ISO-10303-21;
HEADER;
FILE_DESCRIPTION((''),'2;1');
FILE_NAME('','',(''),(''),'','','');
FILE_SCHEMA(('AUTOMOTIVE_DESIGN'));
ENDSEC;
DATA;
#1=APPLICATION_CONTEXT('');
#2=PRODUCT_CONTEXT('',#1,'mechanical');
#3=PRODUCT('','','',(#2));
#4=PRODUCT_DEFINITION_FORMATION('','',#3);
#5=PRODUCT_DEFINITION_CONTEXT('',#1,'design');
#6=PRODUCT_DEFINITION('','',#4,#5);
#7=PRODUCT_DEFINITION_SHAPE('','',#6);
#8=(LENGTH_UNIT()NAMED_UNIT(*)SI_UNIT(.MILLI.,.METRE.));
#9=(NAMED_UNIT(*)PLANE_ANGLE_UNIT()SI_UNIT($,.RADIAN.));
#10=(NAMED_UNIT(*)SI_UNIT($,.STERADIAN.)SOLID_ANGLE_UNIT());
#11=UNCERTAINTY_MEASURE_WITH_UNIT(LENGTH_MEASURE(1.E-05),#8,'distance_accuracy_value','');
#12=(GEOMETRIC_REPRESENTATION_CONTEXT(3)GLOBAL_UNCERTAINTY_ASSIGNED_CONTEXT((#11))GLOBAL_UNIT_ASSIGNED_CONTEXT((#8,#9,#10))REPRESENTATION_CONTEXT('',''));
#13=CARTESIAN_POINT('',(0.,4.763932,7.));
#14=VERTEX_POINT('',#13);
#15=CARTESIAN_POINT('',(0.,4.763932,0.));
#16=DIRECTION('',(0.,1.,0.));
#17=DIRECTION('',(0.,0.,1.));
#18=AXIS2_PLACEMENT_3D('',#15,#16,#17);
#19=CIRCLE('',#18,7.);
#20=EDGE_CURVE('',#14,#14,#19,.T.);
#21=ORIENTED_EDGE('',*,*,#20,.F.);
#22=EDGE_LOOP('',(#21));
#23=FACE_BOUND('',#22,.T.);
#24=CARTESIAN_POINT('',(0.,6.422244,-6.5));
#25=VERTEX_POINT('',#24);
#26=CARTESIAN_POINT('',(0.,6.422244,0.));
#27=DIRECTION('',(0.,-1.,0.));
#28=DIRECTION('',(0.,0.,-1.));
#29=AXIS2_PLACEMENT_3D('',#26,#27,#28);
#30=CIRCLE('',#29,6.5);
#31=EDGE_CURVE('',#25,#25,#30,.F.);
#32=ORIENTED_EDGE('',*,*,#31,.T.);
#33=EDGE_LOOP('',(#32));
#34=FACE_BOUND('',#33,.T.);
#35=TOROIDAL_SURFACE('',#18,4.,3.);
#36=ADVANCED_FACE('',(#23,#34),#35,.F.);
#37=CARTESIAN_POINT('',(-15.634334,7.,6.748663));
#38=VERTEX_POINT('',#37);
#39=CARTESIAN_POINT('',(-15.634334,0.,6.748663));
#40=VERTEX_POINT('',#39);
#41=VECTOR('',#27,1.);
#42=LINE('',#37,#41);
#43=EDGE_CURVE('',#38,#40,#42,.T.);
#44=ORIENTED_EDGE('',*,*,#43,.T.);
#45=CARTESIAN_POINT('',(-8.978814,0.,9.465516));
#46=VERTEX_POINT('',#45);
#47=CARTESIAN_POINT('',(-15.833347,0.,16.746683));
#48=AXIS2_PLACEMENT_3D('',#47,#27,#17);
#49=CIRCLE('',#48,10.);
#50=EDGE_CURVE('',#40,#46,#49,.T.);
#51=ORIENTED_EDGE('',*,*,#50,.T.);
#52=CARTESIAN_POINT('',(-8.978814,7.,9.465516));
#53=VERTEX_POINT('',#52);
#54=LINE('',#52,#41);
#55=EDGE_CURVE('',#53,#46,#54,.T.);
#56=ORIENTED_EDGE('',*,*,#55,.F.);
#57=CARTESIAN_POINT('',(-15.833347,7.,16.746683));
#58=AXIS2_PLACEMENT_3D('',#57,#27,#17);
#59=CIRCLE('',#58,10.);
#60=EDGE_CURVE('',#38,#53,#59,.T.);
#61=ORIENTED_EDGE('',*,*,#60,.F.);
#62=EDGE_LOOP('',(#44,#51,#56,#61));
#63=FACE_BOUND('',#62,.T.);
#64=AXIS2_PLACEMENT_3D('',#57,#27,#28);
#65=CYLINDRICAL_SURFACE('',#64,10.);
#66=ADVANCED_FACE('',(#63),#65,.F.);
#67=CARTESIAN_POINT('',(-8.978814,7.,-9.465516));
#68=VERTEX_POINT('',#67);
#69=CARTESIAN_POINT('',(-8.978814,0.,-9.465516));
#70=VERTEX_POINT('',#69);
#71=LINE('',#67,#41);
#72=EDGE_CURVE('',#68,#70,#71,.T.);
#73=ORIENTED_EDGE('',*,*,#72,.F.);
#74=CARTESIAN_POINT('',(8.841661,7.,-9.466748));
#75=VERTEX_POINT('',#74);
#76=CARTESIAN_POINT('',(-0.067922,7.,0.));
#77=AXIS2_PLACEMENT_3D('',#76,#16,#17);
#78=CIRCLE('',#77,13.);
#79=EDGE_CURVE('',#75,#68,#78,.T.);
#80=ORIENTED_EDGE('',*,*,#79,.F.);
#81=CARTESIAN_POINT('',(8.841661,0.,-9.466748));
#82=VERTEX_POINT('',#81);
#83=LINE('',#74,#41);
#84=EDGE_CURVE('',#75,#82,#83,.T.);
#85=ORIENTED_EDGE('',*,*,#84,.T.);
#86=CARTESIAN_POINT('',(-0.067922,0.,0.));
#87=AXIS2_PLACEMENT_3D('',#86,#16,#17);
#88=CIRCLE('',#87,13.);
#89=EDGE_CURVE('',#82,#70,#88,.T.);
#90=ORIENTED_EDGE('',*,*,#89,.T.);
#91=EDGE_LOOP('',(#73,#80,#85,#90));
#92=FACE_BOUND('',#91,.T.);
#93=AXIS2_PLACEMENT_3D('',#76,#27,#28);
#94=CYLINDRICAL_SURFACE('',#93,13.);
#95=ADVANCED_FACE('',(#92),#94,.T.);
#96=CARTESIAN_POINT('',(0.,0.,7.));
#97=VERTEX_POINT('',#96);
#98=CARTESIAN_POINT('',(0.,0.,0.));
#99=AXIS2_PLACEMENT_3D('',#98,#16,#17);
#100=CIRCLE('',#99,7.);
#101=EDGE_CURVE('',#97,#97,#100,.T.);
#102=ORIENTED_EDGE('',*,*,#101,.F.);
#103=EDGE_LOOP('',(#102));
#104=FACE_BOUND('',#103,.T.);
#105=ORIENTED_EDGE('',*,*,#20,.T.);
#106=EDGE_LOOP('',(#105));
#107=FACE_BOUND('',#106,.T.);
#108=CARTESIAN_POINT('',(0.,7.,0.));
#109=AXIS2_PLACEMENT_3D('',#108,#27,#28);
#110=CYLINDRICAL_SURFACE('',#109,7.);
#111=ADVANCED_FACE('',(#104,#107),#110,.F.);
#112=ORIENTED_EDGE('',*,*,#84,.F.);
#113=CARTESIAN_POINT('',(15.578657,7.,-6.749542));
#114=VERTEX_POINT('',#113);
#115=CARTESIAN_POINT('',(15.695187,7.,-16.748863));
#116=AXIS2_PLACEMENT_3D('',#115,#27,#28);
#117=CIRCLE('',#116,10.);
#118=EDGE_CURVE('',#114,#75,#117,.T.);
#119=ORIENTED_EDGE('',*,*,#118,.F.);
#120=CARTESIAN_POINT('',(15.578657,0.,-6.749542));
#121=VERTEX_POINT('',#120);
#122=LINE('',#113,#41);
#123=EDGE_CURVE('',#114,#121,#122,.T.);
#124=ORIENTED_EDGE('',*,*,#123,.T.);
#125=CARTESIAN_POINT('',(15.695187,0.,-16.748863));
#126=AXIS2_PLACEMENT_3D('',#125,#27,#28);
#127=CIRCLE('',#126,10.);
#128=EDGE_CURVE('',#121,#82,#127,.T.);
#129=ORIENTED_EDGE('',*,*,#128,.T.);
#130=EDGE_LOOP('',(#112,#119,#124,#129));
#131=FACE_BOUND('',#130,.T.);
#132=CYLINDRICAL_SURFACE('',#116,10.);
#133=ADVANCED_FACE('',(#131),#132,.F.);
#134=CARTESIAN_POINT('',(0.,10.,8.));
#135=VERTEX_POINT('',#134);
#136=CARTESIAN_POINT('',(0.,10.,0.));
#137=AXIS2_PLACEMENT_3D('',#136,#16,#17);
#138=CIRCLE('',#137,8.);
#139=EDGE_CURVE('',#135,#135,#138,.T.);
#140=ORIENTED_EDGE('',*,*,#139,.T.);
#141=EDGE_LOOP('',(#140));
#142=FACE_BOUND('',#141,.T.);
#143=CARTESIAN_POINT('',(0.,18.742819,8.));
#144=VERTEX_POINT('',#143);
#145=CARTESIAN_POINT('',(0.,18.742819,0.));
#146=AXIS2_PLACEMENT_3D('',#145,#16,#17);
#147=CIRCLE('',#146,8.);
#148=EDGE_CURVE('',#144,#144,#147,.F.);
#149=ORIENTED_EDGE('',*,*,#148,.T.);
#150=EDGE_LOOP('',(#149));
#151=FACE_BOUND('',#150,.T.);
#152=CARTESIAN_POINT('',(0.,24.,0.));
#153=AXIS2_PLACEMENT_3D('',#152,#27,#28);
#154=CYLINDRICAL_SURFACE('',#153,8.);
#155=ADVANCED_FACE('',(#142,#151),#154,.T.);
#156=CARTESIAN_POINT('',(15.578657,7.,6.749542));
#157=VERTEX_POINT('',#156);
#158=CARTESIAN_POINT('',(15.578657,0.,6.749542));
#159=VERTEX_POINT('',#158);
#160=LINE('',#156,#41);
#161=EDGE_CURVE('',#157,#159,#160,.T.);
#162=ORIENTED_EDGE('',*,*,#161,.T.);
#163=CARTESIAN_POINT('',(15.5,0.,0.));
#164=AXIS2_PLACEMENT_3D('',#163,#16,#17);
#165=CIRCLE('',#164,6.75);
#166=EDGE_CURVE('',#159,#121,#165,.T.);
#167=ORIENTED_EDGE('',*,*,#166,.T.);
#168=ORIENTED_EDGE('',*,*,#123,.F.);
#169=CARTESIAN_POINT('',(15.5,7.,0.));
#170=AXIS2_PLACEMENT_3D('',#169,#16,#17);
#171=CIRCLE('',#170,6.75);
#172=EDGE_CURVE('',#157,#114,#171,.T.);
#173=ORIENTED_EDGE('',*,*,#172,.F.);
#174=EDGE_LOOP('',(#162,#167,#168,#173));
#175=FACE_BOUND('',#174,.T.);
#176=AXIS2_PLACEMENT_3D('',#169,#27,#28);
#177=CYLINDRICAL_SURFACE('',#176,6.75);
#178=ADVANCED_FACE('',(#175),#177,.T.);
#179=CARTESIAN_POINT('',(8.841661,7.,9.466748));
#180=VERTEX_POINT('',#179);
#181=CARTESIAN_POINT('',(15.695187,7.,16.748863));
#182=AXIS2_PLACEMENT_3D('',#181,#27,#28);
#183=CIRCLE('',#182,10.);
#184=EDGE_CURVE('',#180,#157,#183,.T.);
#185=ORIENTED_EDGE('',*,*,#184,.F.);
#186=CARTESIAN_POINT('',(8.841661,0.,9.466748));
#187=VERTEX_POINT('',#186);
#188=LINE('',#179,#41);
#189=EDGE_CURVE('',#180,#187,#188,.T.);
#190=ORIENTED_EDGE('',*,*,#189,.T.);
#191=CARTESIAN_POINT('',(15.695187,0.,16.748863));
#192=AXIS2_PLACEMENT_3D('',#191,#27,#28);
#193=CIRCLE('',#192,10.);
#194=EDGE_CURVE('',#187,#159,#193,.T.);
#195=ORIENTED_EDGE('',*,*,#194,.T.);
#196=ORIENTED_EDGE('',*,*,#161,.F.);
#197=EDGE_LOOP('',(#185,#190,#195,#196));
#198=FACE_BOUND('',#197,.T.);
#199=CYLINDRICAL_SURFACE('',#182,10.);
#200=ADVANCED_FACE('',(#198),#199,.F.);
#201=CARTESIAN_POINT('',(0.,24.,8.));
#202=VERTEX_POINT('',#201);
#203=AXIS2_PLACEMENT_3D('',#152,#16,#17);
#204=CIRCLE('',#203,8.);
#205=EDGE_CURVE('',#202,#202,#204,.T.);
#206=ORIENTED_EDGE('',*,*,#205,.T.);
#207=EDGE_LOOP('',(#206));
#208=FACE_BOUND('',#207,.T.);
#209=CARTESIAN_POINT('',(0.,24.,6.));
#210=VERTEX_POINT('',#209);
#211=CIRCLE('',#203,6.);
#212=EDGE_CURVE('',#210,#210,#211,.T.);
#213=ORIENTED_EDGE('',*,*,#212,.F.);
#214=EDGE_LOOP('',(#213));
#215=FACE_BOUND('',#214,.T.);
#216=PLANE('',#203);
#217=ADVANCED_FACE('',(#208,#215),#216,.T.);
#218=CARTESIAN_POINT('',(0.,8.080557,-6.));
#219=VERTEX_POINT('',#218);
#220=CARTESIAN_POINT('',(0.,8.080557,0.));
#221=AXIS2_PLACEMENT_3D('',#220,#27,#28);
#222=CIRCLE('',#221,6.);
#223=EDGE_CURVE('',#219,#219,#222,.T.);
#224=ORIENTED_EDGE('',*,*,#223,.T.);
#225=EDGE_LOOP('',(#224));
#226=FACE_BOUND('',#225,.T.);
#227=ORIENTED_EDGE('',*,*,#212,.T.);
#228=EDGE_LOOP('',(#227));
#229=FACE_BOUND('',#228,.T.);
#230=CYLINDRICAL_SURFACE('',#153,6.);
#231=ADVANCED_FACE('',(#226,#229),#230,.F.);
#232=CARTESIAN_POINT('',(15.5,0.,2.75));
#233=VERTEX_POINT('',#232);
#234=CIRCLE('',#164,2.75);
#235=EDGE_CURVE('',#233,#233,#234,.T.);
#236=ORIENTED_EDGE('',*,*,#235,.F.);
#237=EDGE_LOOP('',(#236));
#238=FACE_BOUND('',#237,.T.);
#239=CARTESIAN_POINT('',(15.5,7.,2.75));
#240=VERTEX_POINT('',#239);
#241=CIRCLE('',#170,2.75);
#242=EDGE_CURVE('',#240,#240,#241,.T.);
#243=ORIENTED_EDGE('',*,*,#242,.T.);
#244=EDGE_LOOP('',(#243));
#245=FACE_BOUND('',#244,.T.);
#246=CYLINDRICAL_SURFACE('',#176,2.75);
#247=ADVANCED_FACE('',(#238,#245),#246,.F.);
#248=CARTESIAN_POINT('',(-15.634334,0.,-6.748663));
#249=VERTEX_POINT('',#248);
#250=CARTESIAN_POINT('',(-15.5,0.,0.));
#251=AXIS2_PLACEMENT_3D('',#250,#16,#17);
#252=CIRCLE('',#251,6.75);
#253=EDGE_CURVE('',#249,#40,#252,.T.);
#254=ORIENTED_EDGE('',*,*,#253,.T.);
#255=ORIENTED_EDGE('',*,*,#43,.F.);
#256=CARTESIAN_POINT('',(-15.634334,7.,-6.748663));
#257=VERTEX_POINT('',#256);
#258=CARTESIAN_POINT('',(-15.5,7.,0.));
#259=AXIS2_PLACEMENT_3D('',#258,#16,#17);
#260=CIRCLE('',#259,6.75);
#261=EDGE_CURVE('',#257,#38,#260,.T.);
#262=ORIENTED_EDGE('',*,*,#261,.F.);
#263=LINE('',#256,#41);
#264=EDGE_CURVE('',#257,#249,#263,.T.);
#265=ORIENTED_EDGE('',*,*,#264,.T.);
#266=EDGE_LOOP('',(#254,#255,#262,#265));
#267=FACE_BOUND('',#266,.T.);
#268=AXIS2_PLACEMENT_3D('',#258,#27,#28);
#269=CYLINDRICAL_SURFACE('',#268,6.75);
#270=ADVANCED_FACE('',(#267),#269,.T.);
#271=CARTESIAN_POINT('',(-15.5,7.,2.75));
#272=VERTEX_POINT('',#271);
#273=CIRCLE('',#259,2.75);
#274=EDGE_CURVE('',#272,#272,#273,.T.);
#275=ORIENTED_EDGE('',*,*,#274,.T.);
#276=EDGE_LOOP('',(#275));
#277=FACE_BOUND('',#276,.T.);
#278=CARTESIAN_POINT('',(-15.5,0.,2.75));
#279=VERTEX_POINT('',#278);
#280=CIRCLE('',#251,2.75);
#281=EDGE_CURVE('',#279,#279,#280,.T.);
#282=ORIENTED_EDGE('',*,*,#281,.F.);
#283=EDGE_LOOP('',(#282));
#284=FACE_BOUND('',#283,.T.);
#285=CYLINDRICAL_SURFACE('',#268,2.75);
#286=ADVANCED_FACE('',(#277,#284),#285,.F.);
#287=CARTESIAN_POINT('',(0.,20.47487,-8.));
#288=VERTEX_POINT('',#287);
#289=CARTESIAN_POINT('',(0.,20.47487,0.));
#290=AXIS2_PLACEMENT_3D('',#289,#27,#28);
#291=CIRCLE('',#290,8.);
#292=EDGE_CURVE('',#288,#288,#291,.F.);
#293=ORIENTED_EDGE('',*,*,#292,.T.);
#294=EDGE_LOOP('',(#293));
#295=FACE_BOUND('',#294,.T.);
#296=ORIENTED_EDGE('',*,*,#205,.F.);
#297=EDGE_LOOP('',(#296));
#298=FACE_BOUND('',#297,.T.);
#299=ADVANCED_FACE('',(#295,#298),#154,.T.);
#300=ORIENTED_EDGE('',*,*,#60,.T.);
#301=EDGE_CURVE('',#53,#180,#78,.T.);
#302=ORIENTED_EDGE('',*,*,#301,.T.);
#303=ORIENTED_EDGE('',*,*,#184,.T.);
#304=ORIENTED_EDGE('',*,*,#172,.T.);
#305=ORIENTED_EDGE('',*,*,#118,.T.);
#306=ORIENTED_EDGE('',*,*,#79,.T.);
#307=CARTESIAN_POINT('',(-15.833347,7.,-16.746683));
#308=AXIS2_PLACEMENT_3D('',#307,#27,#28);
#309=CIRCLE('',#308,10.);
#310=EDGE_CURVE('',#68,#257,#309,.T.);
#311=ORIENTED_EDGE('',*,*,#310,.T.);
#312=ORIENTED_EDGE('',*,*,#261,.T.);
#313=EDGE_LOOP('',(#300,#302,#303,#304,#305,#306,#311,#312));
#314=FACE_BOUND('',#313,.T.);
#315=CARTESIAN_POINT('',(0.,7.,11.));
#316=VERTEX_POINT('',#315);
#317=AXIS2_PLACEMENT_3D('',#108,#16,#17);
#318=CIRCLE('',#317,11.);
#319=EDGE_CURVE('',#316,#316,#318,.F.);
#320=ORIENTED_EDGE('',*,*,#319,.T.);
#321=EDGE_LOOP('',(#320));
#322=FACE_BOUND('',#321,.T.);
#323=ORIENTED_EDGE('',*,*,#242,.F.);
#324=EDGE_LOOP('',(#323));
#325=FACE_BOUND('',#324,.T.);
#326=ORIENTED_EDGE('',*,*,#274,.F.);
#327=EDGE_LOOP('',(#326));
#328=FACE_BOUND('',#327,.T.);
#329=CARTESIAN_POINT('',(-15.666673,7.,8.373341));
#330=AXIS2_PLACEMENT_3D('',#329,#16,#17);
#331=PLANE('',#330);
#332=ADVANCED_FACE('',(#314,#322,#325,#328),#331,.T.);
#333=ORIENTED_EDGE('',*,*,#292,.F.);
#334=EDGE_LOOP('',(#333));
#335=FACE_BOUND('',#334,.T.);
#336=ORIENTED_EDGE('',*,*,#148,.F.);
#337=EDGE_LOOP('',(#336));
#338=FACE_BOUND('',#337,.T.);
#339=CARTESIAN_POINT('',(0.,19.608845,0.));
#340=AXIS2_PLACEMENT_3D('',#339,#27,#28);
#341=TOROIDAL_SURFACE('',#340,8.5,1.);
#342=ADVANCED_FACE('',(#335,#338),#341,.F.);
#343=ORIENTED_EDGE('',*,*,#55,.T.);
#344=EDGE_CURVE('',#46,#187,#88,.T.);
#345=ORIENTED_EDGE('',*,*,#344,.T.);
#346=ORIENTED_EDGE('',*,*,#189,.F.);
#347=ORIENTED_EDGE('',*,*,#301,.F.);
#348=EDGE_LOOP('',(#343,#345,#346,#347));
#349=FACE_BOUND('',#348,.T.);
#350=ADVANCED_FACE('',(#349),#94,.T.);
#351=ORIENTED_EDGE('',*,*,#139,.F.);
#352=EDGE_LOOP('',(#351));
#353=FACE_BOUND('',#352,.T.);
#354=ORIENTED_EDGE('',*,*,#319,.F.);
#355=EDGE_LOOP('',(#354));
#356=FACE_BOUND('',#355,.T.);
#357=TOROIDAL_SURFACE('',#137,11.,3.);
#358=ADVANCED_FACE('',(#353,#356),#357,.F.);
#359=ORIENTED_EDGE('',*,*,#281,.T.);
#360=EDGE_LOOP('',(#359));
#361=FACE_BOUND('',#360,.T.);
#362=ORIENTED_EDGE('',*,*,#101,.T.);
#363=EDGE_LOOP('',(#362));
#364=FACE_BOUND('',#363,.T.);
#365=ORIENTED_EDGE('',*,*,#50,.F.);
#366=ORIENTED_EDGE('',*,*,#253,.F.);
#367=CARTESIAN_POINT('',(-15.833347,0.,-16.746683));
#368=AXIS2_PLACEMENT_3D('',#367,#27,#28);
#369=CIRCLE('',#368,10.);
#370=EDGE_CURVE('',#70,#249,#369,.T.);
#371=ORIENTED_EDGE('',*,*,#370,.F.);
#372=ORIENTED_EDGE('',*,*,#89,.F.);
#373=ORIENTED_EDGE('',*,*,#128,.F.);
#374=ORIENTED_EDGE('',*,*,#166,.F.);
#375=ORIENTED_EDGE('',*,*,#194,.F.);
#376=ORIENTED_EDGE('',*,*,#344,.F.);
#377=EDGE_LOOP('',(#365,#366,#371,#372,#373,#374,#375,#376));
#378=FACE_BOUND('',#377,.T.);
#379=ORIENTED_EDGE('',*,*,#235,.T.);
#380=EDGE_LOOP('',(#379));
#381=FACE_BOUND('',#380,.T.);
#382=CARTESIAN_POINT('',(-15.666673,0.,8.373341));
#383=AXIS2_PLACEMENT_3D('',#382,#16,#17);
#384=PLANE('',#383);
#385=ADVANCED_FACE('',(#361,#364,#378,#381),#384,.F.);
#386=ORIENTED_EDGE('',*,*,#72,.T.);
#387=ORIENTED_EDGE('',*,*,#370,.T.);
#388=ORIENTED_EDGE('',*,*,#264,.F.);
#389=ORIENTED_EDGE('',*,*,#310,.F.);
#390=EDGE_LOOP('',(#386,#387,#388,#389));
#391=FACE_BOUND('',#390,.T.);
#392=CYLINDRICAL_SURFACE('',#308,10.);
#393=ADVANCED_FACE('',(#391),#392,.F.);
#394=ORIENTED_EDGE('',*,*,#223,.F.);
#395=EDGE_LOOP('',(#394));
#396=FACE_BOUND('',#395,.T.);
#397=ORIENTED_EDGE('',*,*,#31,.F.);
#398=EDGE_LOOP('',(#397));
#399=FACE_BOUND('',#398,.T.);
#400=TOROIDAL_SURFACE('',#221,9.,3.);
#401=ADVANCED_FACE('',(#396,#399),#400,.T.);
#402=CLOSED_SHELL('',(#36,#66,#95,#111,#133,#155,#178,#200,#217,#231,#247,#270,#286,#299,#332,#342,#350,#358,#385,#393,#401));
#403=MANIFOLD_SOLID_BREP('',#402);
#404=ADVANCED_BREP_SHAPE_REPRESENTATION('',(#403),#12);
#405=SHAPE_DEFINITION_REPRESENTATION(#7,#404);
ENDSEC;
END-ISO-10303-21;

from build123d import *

# Parameters (mm, degrees)
SKETCH1_R           = 7
SKETCH1_R_2         = 2.75
BOSS_EXTRUDE1_DEPTH = 7
SKETCH2_R           = 8
SKETCH2_R_2         = 6
BOSS_EXTRUDE2_DEPTH = 17
FILLET1_R           = 3
FILLET2_R           = 3
SKETCH3_R           = 1


with BuildPart() as part:
    # Sketch1 → Boss-Extrude1 (new body)
    with BuildSketch(Plane(origin=(0, 0, 0), x_dir=(1, 0, 0), z_dir=(0, 1, 0))):
        with BuildLine():
            ThreePointArc((-15.634333704, 6.748663161), (-22.25, 0), (-15.634333704, -6.748663161))
            ThreePointArc((-15.634333704, -6.748663161), (-12.054001616, -7.488359295), (-8.978814065, -9.465516285))
            ThreePointArc((-8.978814065, -9.465516285), (-0.068820662, -12.999999969), (8.841661443, -9.466748488))
            ThreePointArc((8.841661443, -9.466748488), (11.954703039, -7.474770851), (15.578657445, -6.749541689))
            ThreePointArc((15.578657445, -6.749541689), (22.25, 0), (15.578657445, 6.749541689))
            ThreePointArc((15.578657445, 6.749541689), (11.954703039, 7.474770851), (8.841661443, 9.466748488))
            ThreePointArc((8.841661443, 9.466748488), (-0.068820662, 12.999999969), (-8.978814065, 9.465516285))
            ThreePointArc((-8.978814065, 9.465516285), (-12.054001616, 7.488359295), (-15.634333704, 6.748663161))
        make_face()
        with Locations(Location((0, 0, 0), (0, 0, 270))):
            Circle(SKETCH1_R, mode=Mode.SUBTRACT)
        with Locations(Location((-15.5, 0, 0), (0, 0, 270))):
            Circle(SKETCH1_R_2, mode=Mode.SUBTRACT)
        with Locations(Location((15.5, 0, 0), (0, 0, 270))):
            Circle(SKETCH1_R_2, mode=Mode.SUBTRACT)
    extrude(amount=BOSS_EXTRUDE1_DEPTH)

    # Sketch2 → Boss-Extrude2 (add)
    with BuildSketch(Plane(origin=(0, 7, 0), x_dir=(1, 0, 0), z_dir=(0, 1, 0))):
        with Locations(Location((0, 0, 0), (0, 0, 270))):
            Circle(SKETCH2_R)
        with Locations(Location((0, 0, 0), (0, 0, 270))):
            Circle(SKETCH2_R_2, mode=Mode.SUBTRACT)
    extrude(amount=BOSS_EXTRUDE2_DEPTH)

    # Fillet1
    # the kernel refuses this fillet: 3 mm, written as the material it adds along each edge
    with BuildSketch(Plane(origin=(0, 7, 0), x_dir=(0, 0, 1), z_dir=(-1, 0, 0))) as fillet1_piece_1:
        with BuildLine():
            CenterArc((4, -2.236067977), FILLET1_R, 0, 48.189685104)
            Line((6, 0), (6.04, 0.04472136))
            ThreePointArc((6.04, 0.04472136), (6.5, 0.06), (7, 0.06))
            Line((7, 0.06), (7.06, 0))
            Line((7.06, 0), (7.06, -2.236067977))
            Line((7.06, -2.236067977), (7, -2.236067977))
        make_face()
    revolve(axis=Axis((0, 7, 0), (0, 1, 0)))
    with BuildSketch(Plane(origin=(0, 7, 0), x_dir=(0, 0, 1), z_dir=(-1, 0, 0))) as fillet1_piece_2:
        with BuildLine():
            CenterArc((8 + FILLET1_R, FILLET1_R), FILLET1_R, 180, 90)
            Line((8, FILLET1_R), (8 - FILLET1_R * 0.02, FILLET1_R))
            Line((8 - FILLET1_R * 0.02, FILLET1_R), (8 - FILLET1_R * 0.02, -FILLET1_R * 0.02))
            Line((8 - FILLET1_R * 0.02, -FILLET1_R * 0.02), (8 + FILLET1_R, -FILLET1_R * 0.02))
            Line((8 + FILLET1_R, -FILLET1_R * 0.02), (8 + FILLET1_R, 0))
        make_face()
    revolve(axis=Axis((0, 7, 0), (0, 1, 0)))

    # Fillet2
    fillet2_edges = [part.edges().sort_by_distance(p)[0] for p in [
        (0, 7, -6),
    ]]
    fillet(fillet2_edges, radius=FILLET2_R)


with BuildPart() as body_2:
    # Sketch3 → Revolve1 (revolve)
    with BuildSketch(Plane(origin=(0, 0, 0), x_dir=(0, 0, -1), z_dir=(1, 0, 0))):
        with Locations((8.5, 19.608844607)):
            Circle(SKETCH3_R)
    revolve(axis=Axis((0, 0, 0), (0, 1, 0)))


with BuildPart() as part_1:
    add(part.part)

    # Intersect1: read off the stored shape, not the designer's step
    # Intersect1: cut body 2
    add(body_2.part, mode=Mode.SUBTRACT)


solid = part_1.part
